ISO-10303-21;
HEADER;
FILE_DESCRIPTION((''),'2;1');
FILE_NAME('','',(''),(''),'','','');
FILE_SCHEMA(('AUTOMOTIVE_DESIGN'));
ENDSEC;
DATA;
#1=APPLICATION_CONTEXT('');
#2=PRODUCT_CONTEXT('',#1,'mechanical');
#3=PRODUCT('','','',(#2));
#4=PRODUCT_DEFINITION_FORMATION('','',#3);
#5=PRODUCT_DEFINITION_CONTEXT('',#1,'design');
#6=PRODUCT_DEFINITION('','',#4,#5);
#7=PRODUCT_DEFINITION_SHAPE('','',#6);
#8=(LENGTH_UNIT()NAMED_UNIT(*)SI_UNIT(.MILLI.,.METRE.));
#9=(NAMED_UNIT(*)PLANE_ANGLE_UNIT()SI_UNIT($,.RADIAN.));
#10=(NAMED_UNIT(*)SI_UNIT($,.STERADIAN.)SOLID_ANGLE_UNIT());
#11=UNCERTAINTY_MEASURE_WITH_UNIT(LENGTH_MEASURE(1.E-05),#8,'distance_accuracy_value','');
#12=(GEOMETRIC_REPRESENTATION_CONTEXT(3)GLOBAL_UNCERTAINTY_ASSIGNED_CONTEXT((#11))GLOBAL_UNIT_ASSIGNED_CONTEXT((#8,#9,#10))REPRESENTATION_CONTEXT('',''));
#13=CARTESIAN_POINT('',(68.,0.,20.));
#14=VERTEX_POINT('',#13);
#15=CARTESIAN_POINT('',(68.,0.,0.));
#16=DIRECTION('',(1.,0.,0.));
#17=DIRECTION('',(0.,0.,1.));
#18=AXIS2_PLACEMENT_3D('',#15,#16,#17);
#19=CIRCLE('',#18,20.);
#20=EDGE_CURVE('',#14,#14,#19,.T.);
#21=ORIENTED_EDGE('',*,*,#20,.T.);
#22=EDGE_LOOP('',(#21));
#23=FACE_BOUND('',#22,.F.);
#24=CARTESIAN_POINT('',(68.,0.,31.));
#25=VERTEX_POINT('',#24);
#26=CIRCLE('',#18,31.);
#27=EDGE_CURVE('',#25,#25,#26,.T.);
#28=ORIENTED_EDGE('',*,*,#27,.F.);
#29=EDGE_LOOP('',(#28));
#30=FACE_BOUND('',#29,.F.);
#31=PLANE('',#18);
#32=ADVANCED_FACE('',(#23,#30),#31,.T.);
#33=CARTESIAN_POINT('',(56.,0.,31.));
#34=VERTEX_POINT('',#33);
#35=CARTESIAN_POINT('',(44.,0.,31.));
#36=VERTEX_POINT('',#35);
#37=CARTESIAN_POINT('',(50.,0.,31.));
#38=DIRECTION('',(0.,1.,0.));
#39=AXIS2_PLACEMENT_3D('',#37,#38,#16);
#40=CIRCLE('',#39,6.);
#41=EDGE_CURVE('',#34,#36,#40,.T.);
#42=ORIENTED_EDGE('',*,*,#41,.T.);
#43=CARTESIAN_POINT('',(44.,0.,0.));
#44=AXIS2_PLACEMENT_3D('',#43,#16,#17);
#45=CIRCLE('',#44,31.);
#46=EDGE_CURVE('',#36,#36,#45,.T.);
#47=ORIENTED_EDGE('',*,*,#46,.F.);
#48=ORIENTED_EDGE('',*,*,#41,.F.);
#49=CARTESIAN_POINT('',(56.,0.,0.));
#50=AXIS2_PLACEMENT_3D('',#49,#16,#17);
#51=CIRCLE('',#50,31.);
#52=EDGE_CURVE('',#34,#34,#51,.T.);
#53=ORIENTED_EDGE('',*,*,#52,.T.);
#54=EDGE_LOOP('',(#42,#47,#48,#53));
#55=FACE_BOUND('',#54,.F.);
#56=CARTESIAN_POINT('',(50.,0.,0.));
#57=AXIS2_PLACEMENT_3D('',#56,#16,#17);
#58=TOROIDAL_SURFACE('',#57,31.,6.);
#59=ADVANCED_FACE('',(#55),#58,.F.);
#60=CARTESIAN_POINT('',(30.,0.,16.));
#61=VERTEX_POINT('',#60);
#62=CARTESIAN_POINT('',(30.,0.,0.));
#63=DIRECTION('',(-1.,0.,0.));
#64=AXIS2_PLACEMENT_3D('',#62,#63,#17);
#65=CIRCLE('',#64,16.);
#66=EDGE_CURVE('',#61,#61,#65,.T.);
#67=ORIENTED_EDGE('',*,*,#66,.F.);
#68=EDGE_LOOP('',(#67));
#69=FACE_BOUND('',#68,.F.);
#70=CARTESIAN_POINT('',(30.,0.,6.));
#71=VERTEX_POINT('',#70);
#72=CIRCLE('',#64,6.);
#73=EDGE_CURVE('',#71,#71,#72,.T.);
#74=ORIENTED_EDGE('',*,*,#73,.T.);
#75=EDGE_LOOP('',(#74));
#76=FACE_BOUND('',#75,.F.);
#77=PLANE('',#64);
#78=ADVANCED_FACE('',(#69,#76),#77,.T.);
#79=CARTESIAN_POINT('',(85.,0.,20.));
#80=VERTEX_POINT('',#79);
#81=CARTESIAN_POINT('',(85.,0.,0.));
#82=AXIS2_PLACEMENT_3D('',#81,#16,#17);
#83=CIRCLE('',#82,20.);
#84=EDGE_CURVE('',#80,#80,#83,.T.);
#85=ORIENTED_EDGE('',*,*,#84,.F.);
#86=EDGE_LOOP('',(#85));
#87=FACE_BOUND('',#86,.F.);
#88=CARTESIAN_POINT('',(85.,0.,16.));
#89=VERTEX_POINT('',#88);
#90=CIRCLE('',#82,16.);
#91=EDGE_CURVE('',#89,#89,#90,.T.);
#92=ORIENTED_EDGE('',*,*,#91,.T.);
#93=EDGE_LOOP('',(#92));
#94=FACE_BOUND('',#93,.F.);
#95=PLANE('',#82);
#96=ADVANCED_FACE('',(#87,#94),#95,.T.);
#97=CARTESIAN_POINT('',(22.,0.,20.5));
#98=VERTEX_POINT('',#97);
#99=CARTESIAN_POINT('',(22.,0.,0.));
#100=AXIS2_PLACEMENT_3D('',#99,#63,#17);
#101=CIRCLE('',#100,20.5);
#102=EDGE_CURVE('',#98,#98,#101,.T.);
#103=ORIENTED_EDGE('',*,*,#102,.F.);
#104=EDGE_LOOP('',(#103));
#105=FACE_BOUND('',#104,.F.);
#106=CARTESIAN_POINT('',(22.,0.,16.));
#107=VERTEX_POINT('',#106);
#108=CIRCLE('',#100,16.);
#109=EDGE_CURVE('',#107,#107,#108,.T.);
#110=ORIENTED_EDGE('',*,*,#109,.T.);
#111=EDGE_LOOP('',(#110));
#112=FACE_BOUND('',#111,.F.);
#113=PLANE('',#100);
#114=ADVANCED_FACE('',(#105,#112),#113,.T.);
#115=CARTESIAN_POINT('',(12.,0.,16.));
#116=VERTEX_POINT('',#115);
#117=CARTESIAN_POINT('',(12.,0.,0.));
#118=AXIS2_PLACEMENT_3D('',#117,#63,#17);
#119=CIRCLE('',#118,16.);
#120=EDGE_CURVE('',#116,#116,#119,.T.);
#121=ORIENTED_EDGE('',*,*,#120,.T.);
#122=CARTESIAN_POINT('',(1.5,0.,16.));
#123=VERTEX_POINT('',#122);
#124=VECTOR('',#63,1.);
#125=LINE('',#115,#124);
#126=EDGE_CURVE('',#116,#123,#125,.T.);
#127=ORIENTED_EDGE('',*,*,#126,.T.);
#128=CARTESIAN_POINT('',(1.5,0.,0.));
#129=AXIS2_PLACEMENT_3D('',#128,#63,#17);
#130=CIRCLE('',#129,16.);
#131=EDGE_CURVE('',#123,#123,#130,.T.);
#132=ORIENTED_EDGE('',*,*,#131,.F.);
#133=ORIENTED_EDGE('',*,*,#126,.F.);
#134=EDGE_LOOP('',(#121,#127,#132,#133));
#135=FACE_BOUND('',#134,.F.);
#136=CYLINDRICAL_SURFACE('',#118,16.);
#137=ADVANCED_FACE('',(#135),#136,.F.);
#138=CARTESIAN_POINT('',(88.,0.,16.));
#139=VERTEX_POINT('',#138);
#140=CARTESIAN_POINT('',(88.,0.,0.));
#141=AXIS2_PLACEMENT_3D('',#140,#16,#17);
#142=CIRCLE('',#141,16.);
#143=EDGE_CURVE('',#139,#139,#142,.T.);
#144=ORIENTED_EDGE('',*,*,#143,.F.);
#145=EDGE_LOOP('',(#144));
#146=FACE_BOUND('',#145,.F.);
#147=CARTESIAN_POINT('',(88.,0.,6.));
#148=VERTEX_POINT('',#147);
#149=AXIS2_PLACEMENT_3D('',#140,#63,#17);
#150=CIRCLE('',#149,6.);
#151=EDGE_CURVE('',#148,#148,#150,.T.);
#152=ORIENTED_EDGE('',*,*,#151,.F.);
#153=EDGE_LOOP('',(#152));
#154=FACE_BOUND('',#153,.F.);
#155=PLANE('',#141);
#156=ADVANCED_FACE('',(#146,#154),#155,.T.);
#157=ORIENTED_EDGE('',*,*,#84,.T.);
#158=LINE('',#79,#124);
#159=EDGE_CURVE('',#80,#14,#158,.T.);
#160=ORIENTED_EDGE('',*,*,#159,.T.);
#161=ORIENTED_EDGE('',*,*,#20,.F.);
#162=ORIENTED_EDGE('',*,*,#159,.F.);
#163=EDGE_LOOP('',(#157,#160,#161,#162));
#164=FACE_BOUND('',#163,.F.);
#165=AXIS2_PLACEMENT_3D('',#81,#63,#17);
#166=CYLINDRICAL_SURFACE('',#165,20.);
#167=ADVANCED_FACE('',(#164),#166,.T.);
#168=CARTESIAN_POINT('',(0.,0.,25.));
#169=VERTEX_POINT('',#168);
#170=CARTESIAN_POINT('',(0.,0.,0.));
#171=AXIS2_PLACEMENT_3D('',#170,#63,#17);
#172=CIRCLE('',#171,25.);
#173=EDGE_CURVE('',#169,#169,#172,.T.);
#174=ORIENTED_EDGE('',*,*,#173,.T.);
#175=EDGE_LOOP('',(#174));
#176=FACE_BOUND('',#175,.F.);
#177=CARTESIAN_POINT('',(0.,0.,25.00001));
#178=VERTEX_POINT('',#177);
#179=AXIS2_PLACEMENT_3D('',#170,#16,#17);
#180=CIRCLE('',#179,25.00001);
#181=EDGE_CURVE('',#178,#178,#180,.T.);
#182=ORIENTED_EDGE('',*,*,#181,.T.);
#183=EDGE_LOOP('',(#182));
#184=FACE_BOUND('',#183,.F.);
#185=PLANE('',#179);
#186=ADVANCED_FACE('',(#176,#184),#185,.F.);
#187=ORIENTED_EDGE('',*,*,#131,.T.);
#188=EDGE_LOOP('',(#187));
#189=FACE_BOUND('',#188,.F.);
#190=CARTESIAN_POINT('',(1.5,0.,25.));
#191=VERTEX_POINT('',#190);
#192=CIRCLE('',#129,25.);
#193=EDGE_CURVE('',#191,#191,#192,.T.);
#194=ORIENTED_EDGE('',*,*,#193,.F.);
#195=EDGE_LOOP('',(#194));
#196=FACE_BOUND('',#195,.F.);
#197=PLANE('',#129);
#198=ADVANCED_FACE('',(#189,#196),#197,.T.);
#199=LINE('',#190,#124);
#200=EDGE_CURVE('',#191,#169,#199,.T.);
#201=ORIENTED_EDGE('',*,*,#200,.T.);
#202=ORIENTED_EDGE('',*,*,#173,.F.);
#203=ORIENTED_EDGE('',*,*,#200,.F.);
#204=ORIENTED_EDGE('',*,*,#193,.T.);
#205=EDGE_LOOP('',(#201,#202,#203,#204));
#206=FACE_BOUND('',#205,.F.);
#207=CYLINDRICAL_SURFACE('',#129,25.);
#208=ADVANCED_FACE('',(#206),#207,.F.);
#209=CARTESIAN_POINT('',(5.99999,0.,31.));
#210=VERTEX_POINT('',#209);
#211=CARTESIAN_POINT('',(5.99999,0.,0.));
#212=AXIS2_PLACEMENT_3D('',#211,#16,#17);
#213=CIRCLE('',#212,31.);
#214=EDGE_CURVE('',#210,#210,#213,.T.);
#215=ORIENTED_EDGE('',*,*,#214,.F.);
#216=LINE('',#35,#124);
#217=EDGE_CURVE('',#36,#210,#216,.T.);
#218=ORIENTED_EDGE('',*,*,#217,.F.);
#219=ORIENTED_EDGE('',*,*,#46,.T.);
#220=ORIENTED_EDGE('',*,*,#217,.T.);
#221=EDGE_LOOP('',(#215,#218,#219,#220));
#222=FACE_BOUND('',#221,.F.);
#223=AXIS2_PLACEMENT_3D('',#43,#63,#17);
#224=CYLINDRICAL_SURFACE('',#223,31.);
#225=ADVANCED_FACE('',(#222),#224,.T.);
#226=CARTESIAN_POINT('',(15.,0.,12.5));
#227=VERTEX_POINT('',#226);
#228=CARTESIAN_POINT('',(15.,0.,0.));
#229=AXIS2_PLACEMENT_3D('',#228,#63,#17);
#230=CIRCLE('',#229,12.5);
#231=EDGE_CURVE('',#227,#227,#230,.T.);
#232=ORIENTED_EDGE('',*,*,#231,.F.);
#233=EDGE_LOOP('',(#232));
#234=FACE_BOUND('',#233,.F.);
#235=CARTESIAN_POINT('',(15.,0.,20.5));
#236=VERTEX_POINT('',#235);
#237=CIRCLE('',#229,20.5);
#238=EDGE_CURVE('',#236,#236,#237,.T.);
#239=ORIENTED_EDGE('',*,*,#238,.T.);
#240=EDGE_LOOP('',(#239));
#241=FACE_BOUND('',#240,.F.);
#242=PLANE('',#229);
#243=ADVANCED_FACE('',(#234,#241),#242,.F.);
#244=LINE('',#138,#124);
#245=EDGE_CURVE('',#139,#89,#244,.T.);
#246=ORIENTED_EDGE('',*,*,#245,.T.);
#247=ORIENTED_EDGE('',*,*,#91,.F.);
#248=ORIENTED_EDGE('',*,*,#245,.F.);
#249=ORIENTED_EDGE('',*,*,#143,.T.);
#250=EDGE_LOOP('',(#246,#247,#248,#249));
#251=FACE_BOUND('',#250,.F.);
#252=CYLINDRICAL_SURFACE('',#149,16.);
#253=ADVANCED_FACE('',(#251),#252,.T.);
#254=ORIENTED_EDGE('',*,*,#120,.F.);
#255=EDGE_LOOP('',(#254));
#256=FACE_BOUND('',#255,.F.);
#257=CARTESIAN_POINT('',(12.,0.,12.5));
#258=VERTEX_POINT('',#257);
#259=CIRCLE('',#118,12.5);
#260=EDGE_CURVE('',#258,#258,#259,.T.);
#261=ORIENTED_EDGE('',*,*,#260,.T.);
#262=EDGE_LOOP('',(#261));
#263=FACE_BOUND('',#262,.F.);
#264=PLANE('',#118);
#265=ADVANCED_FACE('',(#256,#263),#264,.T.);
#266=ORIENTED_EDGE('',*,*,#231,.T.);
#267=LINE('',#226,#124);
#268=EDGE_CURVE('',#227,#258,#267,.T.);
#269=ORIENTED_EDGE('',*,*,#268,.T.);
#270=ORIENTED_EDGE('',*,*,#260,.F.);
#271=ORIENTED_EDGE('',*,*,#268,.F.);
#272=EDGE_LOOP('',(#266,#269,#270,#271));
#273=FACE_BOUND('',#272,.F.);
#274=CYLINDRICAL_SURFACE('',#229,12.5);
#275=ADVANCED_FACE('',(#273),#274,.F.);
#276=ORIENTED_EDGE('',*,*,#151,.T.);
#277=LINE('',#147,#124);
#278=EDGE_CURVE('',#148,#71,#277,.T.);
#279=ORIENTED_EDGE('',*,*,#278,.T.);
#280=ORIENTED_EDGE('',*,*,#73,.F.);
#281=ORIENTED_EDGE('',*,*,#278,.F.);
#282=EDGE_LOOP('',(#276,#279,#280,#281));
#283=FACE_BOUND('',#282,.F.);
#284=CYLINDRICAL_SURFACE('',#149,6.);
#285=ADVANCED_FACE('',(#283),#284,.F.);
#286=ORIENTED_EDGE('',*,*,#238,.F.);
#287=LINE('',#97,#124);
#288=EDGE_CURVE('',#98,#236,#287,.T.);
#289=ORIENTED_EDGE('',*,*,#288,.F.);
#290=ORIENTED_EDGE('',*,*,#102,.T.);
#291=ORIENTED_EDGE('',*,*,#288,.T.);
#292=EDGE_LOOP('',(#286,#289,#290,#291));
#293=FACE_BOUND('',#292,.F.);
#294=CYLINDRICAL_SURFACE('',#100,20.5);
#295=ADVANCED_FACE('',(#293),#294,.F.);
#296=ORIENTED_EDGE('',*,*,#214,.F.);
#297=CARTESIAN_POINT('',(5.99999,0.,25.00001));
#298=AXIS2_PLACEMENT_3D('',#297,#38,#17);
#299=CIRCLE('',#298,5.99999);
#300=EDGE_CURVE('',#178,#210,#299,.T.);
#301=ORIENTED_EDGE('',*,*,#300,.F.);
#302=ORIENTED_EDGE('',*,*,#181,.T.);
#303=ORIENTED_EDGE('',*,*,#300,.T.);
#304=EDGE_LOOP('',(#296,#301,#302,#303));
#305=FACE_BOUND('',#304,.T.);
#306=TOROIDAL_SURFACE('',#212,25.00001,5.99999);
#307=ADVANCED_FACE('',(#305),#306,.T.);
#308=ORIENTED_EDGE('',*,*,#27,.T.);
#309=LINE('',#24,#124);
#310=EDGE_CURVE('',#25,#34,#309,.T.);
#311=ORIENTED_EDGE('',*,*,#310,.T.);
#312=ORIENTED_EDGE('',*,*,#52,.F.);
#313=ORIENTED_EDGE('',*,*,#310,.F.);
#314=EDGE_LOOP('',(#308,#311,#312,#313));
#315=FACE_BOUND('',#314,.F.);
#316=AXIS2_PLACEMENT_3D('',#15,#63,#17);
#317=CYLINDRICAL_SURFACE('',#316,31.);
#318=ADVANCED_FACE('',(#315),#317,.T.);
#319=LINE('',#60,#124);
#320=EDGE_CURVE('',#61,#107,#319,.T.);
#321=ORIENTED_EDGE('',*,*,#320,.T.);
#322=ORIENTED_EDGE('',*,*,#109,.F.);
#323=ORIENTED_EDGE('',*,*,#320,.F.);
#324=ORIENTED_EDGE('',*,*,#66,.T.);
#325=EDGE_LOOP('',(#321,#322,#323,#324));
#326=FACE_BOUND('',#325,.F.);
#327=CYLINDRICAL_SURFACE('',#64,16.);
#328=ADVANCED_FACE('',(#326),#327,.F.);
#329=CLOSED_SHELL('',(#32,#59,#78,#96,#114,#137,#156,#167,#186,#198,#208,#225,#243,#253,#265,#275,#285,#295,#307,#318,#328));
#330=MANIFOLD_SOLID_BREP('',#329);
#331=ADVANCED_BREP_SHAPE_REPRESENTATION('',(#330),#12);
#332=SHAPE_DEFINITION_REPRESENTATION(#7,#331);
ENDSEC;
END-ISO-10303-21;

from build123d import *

# Parameters (mm, degrees)
F4_R = 5.99999


# Not quite as in the source:
# - a fillet or chamfer is up to 0.001 mm smaller than in the source, because OpenCascade refuses the exact size


with BuildPart() as f1:
    # F0 (on Front) → F1 (revolve)
    with BuildSketch(Plane.XZ):
        with BuildLine():
            Line((0, 31), (0, 0))
            Line((0, 0), (88, 0))
            Line((88, 0), (88, 16))
            Line((88, 16), (85, 16))
            Line((85, 16), (85, 20))
            Line((85, 20), (68, 20))
            Line((68, 20), (68, 31))
            Line((68, 31), (56, 31))
            ThreePointArc((56, 31), (50, 25), (44, 31))
            Line((44, 31), (0, 31))
        make_face()
    revolve(axis=Axis((55.2076362073, 0, 0), (1, 0, 0)))

    # F2 (on Front) → F3 (revolve, cut)
    with BuildSketch(Plane.XZ):
        Polygon((0, 25), (0, 0), (88, 0), (88, 6), (30, 6), (30, 16), (22, 16), (22, 20.5), (15, 20.5), (15, 12.5), (12, 12.5), (12, 16), (1.5, 16), (1.5, 25), align=None)
    revolve(axis=Axis((-14.1267481727, 0, 0), (-1, 0, 0)), mode=Mode.SUBTRACT)

    # F4 (radius 6 in the source; OpenCascade refuses exactly that, so slightly less here)
    f4_edges = [f1.edges().sort_by_distance(p)[0] for p in [
        (0, 0, -31),
    ]]
    fillet(f4_edges, radius=F4_R)


solid = f1.part
